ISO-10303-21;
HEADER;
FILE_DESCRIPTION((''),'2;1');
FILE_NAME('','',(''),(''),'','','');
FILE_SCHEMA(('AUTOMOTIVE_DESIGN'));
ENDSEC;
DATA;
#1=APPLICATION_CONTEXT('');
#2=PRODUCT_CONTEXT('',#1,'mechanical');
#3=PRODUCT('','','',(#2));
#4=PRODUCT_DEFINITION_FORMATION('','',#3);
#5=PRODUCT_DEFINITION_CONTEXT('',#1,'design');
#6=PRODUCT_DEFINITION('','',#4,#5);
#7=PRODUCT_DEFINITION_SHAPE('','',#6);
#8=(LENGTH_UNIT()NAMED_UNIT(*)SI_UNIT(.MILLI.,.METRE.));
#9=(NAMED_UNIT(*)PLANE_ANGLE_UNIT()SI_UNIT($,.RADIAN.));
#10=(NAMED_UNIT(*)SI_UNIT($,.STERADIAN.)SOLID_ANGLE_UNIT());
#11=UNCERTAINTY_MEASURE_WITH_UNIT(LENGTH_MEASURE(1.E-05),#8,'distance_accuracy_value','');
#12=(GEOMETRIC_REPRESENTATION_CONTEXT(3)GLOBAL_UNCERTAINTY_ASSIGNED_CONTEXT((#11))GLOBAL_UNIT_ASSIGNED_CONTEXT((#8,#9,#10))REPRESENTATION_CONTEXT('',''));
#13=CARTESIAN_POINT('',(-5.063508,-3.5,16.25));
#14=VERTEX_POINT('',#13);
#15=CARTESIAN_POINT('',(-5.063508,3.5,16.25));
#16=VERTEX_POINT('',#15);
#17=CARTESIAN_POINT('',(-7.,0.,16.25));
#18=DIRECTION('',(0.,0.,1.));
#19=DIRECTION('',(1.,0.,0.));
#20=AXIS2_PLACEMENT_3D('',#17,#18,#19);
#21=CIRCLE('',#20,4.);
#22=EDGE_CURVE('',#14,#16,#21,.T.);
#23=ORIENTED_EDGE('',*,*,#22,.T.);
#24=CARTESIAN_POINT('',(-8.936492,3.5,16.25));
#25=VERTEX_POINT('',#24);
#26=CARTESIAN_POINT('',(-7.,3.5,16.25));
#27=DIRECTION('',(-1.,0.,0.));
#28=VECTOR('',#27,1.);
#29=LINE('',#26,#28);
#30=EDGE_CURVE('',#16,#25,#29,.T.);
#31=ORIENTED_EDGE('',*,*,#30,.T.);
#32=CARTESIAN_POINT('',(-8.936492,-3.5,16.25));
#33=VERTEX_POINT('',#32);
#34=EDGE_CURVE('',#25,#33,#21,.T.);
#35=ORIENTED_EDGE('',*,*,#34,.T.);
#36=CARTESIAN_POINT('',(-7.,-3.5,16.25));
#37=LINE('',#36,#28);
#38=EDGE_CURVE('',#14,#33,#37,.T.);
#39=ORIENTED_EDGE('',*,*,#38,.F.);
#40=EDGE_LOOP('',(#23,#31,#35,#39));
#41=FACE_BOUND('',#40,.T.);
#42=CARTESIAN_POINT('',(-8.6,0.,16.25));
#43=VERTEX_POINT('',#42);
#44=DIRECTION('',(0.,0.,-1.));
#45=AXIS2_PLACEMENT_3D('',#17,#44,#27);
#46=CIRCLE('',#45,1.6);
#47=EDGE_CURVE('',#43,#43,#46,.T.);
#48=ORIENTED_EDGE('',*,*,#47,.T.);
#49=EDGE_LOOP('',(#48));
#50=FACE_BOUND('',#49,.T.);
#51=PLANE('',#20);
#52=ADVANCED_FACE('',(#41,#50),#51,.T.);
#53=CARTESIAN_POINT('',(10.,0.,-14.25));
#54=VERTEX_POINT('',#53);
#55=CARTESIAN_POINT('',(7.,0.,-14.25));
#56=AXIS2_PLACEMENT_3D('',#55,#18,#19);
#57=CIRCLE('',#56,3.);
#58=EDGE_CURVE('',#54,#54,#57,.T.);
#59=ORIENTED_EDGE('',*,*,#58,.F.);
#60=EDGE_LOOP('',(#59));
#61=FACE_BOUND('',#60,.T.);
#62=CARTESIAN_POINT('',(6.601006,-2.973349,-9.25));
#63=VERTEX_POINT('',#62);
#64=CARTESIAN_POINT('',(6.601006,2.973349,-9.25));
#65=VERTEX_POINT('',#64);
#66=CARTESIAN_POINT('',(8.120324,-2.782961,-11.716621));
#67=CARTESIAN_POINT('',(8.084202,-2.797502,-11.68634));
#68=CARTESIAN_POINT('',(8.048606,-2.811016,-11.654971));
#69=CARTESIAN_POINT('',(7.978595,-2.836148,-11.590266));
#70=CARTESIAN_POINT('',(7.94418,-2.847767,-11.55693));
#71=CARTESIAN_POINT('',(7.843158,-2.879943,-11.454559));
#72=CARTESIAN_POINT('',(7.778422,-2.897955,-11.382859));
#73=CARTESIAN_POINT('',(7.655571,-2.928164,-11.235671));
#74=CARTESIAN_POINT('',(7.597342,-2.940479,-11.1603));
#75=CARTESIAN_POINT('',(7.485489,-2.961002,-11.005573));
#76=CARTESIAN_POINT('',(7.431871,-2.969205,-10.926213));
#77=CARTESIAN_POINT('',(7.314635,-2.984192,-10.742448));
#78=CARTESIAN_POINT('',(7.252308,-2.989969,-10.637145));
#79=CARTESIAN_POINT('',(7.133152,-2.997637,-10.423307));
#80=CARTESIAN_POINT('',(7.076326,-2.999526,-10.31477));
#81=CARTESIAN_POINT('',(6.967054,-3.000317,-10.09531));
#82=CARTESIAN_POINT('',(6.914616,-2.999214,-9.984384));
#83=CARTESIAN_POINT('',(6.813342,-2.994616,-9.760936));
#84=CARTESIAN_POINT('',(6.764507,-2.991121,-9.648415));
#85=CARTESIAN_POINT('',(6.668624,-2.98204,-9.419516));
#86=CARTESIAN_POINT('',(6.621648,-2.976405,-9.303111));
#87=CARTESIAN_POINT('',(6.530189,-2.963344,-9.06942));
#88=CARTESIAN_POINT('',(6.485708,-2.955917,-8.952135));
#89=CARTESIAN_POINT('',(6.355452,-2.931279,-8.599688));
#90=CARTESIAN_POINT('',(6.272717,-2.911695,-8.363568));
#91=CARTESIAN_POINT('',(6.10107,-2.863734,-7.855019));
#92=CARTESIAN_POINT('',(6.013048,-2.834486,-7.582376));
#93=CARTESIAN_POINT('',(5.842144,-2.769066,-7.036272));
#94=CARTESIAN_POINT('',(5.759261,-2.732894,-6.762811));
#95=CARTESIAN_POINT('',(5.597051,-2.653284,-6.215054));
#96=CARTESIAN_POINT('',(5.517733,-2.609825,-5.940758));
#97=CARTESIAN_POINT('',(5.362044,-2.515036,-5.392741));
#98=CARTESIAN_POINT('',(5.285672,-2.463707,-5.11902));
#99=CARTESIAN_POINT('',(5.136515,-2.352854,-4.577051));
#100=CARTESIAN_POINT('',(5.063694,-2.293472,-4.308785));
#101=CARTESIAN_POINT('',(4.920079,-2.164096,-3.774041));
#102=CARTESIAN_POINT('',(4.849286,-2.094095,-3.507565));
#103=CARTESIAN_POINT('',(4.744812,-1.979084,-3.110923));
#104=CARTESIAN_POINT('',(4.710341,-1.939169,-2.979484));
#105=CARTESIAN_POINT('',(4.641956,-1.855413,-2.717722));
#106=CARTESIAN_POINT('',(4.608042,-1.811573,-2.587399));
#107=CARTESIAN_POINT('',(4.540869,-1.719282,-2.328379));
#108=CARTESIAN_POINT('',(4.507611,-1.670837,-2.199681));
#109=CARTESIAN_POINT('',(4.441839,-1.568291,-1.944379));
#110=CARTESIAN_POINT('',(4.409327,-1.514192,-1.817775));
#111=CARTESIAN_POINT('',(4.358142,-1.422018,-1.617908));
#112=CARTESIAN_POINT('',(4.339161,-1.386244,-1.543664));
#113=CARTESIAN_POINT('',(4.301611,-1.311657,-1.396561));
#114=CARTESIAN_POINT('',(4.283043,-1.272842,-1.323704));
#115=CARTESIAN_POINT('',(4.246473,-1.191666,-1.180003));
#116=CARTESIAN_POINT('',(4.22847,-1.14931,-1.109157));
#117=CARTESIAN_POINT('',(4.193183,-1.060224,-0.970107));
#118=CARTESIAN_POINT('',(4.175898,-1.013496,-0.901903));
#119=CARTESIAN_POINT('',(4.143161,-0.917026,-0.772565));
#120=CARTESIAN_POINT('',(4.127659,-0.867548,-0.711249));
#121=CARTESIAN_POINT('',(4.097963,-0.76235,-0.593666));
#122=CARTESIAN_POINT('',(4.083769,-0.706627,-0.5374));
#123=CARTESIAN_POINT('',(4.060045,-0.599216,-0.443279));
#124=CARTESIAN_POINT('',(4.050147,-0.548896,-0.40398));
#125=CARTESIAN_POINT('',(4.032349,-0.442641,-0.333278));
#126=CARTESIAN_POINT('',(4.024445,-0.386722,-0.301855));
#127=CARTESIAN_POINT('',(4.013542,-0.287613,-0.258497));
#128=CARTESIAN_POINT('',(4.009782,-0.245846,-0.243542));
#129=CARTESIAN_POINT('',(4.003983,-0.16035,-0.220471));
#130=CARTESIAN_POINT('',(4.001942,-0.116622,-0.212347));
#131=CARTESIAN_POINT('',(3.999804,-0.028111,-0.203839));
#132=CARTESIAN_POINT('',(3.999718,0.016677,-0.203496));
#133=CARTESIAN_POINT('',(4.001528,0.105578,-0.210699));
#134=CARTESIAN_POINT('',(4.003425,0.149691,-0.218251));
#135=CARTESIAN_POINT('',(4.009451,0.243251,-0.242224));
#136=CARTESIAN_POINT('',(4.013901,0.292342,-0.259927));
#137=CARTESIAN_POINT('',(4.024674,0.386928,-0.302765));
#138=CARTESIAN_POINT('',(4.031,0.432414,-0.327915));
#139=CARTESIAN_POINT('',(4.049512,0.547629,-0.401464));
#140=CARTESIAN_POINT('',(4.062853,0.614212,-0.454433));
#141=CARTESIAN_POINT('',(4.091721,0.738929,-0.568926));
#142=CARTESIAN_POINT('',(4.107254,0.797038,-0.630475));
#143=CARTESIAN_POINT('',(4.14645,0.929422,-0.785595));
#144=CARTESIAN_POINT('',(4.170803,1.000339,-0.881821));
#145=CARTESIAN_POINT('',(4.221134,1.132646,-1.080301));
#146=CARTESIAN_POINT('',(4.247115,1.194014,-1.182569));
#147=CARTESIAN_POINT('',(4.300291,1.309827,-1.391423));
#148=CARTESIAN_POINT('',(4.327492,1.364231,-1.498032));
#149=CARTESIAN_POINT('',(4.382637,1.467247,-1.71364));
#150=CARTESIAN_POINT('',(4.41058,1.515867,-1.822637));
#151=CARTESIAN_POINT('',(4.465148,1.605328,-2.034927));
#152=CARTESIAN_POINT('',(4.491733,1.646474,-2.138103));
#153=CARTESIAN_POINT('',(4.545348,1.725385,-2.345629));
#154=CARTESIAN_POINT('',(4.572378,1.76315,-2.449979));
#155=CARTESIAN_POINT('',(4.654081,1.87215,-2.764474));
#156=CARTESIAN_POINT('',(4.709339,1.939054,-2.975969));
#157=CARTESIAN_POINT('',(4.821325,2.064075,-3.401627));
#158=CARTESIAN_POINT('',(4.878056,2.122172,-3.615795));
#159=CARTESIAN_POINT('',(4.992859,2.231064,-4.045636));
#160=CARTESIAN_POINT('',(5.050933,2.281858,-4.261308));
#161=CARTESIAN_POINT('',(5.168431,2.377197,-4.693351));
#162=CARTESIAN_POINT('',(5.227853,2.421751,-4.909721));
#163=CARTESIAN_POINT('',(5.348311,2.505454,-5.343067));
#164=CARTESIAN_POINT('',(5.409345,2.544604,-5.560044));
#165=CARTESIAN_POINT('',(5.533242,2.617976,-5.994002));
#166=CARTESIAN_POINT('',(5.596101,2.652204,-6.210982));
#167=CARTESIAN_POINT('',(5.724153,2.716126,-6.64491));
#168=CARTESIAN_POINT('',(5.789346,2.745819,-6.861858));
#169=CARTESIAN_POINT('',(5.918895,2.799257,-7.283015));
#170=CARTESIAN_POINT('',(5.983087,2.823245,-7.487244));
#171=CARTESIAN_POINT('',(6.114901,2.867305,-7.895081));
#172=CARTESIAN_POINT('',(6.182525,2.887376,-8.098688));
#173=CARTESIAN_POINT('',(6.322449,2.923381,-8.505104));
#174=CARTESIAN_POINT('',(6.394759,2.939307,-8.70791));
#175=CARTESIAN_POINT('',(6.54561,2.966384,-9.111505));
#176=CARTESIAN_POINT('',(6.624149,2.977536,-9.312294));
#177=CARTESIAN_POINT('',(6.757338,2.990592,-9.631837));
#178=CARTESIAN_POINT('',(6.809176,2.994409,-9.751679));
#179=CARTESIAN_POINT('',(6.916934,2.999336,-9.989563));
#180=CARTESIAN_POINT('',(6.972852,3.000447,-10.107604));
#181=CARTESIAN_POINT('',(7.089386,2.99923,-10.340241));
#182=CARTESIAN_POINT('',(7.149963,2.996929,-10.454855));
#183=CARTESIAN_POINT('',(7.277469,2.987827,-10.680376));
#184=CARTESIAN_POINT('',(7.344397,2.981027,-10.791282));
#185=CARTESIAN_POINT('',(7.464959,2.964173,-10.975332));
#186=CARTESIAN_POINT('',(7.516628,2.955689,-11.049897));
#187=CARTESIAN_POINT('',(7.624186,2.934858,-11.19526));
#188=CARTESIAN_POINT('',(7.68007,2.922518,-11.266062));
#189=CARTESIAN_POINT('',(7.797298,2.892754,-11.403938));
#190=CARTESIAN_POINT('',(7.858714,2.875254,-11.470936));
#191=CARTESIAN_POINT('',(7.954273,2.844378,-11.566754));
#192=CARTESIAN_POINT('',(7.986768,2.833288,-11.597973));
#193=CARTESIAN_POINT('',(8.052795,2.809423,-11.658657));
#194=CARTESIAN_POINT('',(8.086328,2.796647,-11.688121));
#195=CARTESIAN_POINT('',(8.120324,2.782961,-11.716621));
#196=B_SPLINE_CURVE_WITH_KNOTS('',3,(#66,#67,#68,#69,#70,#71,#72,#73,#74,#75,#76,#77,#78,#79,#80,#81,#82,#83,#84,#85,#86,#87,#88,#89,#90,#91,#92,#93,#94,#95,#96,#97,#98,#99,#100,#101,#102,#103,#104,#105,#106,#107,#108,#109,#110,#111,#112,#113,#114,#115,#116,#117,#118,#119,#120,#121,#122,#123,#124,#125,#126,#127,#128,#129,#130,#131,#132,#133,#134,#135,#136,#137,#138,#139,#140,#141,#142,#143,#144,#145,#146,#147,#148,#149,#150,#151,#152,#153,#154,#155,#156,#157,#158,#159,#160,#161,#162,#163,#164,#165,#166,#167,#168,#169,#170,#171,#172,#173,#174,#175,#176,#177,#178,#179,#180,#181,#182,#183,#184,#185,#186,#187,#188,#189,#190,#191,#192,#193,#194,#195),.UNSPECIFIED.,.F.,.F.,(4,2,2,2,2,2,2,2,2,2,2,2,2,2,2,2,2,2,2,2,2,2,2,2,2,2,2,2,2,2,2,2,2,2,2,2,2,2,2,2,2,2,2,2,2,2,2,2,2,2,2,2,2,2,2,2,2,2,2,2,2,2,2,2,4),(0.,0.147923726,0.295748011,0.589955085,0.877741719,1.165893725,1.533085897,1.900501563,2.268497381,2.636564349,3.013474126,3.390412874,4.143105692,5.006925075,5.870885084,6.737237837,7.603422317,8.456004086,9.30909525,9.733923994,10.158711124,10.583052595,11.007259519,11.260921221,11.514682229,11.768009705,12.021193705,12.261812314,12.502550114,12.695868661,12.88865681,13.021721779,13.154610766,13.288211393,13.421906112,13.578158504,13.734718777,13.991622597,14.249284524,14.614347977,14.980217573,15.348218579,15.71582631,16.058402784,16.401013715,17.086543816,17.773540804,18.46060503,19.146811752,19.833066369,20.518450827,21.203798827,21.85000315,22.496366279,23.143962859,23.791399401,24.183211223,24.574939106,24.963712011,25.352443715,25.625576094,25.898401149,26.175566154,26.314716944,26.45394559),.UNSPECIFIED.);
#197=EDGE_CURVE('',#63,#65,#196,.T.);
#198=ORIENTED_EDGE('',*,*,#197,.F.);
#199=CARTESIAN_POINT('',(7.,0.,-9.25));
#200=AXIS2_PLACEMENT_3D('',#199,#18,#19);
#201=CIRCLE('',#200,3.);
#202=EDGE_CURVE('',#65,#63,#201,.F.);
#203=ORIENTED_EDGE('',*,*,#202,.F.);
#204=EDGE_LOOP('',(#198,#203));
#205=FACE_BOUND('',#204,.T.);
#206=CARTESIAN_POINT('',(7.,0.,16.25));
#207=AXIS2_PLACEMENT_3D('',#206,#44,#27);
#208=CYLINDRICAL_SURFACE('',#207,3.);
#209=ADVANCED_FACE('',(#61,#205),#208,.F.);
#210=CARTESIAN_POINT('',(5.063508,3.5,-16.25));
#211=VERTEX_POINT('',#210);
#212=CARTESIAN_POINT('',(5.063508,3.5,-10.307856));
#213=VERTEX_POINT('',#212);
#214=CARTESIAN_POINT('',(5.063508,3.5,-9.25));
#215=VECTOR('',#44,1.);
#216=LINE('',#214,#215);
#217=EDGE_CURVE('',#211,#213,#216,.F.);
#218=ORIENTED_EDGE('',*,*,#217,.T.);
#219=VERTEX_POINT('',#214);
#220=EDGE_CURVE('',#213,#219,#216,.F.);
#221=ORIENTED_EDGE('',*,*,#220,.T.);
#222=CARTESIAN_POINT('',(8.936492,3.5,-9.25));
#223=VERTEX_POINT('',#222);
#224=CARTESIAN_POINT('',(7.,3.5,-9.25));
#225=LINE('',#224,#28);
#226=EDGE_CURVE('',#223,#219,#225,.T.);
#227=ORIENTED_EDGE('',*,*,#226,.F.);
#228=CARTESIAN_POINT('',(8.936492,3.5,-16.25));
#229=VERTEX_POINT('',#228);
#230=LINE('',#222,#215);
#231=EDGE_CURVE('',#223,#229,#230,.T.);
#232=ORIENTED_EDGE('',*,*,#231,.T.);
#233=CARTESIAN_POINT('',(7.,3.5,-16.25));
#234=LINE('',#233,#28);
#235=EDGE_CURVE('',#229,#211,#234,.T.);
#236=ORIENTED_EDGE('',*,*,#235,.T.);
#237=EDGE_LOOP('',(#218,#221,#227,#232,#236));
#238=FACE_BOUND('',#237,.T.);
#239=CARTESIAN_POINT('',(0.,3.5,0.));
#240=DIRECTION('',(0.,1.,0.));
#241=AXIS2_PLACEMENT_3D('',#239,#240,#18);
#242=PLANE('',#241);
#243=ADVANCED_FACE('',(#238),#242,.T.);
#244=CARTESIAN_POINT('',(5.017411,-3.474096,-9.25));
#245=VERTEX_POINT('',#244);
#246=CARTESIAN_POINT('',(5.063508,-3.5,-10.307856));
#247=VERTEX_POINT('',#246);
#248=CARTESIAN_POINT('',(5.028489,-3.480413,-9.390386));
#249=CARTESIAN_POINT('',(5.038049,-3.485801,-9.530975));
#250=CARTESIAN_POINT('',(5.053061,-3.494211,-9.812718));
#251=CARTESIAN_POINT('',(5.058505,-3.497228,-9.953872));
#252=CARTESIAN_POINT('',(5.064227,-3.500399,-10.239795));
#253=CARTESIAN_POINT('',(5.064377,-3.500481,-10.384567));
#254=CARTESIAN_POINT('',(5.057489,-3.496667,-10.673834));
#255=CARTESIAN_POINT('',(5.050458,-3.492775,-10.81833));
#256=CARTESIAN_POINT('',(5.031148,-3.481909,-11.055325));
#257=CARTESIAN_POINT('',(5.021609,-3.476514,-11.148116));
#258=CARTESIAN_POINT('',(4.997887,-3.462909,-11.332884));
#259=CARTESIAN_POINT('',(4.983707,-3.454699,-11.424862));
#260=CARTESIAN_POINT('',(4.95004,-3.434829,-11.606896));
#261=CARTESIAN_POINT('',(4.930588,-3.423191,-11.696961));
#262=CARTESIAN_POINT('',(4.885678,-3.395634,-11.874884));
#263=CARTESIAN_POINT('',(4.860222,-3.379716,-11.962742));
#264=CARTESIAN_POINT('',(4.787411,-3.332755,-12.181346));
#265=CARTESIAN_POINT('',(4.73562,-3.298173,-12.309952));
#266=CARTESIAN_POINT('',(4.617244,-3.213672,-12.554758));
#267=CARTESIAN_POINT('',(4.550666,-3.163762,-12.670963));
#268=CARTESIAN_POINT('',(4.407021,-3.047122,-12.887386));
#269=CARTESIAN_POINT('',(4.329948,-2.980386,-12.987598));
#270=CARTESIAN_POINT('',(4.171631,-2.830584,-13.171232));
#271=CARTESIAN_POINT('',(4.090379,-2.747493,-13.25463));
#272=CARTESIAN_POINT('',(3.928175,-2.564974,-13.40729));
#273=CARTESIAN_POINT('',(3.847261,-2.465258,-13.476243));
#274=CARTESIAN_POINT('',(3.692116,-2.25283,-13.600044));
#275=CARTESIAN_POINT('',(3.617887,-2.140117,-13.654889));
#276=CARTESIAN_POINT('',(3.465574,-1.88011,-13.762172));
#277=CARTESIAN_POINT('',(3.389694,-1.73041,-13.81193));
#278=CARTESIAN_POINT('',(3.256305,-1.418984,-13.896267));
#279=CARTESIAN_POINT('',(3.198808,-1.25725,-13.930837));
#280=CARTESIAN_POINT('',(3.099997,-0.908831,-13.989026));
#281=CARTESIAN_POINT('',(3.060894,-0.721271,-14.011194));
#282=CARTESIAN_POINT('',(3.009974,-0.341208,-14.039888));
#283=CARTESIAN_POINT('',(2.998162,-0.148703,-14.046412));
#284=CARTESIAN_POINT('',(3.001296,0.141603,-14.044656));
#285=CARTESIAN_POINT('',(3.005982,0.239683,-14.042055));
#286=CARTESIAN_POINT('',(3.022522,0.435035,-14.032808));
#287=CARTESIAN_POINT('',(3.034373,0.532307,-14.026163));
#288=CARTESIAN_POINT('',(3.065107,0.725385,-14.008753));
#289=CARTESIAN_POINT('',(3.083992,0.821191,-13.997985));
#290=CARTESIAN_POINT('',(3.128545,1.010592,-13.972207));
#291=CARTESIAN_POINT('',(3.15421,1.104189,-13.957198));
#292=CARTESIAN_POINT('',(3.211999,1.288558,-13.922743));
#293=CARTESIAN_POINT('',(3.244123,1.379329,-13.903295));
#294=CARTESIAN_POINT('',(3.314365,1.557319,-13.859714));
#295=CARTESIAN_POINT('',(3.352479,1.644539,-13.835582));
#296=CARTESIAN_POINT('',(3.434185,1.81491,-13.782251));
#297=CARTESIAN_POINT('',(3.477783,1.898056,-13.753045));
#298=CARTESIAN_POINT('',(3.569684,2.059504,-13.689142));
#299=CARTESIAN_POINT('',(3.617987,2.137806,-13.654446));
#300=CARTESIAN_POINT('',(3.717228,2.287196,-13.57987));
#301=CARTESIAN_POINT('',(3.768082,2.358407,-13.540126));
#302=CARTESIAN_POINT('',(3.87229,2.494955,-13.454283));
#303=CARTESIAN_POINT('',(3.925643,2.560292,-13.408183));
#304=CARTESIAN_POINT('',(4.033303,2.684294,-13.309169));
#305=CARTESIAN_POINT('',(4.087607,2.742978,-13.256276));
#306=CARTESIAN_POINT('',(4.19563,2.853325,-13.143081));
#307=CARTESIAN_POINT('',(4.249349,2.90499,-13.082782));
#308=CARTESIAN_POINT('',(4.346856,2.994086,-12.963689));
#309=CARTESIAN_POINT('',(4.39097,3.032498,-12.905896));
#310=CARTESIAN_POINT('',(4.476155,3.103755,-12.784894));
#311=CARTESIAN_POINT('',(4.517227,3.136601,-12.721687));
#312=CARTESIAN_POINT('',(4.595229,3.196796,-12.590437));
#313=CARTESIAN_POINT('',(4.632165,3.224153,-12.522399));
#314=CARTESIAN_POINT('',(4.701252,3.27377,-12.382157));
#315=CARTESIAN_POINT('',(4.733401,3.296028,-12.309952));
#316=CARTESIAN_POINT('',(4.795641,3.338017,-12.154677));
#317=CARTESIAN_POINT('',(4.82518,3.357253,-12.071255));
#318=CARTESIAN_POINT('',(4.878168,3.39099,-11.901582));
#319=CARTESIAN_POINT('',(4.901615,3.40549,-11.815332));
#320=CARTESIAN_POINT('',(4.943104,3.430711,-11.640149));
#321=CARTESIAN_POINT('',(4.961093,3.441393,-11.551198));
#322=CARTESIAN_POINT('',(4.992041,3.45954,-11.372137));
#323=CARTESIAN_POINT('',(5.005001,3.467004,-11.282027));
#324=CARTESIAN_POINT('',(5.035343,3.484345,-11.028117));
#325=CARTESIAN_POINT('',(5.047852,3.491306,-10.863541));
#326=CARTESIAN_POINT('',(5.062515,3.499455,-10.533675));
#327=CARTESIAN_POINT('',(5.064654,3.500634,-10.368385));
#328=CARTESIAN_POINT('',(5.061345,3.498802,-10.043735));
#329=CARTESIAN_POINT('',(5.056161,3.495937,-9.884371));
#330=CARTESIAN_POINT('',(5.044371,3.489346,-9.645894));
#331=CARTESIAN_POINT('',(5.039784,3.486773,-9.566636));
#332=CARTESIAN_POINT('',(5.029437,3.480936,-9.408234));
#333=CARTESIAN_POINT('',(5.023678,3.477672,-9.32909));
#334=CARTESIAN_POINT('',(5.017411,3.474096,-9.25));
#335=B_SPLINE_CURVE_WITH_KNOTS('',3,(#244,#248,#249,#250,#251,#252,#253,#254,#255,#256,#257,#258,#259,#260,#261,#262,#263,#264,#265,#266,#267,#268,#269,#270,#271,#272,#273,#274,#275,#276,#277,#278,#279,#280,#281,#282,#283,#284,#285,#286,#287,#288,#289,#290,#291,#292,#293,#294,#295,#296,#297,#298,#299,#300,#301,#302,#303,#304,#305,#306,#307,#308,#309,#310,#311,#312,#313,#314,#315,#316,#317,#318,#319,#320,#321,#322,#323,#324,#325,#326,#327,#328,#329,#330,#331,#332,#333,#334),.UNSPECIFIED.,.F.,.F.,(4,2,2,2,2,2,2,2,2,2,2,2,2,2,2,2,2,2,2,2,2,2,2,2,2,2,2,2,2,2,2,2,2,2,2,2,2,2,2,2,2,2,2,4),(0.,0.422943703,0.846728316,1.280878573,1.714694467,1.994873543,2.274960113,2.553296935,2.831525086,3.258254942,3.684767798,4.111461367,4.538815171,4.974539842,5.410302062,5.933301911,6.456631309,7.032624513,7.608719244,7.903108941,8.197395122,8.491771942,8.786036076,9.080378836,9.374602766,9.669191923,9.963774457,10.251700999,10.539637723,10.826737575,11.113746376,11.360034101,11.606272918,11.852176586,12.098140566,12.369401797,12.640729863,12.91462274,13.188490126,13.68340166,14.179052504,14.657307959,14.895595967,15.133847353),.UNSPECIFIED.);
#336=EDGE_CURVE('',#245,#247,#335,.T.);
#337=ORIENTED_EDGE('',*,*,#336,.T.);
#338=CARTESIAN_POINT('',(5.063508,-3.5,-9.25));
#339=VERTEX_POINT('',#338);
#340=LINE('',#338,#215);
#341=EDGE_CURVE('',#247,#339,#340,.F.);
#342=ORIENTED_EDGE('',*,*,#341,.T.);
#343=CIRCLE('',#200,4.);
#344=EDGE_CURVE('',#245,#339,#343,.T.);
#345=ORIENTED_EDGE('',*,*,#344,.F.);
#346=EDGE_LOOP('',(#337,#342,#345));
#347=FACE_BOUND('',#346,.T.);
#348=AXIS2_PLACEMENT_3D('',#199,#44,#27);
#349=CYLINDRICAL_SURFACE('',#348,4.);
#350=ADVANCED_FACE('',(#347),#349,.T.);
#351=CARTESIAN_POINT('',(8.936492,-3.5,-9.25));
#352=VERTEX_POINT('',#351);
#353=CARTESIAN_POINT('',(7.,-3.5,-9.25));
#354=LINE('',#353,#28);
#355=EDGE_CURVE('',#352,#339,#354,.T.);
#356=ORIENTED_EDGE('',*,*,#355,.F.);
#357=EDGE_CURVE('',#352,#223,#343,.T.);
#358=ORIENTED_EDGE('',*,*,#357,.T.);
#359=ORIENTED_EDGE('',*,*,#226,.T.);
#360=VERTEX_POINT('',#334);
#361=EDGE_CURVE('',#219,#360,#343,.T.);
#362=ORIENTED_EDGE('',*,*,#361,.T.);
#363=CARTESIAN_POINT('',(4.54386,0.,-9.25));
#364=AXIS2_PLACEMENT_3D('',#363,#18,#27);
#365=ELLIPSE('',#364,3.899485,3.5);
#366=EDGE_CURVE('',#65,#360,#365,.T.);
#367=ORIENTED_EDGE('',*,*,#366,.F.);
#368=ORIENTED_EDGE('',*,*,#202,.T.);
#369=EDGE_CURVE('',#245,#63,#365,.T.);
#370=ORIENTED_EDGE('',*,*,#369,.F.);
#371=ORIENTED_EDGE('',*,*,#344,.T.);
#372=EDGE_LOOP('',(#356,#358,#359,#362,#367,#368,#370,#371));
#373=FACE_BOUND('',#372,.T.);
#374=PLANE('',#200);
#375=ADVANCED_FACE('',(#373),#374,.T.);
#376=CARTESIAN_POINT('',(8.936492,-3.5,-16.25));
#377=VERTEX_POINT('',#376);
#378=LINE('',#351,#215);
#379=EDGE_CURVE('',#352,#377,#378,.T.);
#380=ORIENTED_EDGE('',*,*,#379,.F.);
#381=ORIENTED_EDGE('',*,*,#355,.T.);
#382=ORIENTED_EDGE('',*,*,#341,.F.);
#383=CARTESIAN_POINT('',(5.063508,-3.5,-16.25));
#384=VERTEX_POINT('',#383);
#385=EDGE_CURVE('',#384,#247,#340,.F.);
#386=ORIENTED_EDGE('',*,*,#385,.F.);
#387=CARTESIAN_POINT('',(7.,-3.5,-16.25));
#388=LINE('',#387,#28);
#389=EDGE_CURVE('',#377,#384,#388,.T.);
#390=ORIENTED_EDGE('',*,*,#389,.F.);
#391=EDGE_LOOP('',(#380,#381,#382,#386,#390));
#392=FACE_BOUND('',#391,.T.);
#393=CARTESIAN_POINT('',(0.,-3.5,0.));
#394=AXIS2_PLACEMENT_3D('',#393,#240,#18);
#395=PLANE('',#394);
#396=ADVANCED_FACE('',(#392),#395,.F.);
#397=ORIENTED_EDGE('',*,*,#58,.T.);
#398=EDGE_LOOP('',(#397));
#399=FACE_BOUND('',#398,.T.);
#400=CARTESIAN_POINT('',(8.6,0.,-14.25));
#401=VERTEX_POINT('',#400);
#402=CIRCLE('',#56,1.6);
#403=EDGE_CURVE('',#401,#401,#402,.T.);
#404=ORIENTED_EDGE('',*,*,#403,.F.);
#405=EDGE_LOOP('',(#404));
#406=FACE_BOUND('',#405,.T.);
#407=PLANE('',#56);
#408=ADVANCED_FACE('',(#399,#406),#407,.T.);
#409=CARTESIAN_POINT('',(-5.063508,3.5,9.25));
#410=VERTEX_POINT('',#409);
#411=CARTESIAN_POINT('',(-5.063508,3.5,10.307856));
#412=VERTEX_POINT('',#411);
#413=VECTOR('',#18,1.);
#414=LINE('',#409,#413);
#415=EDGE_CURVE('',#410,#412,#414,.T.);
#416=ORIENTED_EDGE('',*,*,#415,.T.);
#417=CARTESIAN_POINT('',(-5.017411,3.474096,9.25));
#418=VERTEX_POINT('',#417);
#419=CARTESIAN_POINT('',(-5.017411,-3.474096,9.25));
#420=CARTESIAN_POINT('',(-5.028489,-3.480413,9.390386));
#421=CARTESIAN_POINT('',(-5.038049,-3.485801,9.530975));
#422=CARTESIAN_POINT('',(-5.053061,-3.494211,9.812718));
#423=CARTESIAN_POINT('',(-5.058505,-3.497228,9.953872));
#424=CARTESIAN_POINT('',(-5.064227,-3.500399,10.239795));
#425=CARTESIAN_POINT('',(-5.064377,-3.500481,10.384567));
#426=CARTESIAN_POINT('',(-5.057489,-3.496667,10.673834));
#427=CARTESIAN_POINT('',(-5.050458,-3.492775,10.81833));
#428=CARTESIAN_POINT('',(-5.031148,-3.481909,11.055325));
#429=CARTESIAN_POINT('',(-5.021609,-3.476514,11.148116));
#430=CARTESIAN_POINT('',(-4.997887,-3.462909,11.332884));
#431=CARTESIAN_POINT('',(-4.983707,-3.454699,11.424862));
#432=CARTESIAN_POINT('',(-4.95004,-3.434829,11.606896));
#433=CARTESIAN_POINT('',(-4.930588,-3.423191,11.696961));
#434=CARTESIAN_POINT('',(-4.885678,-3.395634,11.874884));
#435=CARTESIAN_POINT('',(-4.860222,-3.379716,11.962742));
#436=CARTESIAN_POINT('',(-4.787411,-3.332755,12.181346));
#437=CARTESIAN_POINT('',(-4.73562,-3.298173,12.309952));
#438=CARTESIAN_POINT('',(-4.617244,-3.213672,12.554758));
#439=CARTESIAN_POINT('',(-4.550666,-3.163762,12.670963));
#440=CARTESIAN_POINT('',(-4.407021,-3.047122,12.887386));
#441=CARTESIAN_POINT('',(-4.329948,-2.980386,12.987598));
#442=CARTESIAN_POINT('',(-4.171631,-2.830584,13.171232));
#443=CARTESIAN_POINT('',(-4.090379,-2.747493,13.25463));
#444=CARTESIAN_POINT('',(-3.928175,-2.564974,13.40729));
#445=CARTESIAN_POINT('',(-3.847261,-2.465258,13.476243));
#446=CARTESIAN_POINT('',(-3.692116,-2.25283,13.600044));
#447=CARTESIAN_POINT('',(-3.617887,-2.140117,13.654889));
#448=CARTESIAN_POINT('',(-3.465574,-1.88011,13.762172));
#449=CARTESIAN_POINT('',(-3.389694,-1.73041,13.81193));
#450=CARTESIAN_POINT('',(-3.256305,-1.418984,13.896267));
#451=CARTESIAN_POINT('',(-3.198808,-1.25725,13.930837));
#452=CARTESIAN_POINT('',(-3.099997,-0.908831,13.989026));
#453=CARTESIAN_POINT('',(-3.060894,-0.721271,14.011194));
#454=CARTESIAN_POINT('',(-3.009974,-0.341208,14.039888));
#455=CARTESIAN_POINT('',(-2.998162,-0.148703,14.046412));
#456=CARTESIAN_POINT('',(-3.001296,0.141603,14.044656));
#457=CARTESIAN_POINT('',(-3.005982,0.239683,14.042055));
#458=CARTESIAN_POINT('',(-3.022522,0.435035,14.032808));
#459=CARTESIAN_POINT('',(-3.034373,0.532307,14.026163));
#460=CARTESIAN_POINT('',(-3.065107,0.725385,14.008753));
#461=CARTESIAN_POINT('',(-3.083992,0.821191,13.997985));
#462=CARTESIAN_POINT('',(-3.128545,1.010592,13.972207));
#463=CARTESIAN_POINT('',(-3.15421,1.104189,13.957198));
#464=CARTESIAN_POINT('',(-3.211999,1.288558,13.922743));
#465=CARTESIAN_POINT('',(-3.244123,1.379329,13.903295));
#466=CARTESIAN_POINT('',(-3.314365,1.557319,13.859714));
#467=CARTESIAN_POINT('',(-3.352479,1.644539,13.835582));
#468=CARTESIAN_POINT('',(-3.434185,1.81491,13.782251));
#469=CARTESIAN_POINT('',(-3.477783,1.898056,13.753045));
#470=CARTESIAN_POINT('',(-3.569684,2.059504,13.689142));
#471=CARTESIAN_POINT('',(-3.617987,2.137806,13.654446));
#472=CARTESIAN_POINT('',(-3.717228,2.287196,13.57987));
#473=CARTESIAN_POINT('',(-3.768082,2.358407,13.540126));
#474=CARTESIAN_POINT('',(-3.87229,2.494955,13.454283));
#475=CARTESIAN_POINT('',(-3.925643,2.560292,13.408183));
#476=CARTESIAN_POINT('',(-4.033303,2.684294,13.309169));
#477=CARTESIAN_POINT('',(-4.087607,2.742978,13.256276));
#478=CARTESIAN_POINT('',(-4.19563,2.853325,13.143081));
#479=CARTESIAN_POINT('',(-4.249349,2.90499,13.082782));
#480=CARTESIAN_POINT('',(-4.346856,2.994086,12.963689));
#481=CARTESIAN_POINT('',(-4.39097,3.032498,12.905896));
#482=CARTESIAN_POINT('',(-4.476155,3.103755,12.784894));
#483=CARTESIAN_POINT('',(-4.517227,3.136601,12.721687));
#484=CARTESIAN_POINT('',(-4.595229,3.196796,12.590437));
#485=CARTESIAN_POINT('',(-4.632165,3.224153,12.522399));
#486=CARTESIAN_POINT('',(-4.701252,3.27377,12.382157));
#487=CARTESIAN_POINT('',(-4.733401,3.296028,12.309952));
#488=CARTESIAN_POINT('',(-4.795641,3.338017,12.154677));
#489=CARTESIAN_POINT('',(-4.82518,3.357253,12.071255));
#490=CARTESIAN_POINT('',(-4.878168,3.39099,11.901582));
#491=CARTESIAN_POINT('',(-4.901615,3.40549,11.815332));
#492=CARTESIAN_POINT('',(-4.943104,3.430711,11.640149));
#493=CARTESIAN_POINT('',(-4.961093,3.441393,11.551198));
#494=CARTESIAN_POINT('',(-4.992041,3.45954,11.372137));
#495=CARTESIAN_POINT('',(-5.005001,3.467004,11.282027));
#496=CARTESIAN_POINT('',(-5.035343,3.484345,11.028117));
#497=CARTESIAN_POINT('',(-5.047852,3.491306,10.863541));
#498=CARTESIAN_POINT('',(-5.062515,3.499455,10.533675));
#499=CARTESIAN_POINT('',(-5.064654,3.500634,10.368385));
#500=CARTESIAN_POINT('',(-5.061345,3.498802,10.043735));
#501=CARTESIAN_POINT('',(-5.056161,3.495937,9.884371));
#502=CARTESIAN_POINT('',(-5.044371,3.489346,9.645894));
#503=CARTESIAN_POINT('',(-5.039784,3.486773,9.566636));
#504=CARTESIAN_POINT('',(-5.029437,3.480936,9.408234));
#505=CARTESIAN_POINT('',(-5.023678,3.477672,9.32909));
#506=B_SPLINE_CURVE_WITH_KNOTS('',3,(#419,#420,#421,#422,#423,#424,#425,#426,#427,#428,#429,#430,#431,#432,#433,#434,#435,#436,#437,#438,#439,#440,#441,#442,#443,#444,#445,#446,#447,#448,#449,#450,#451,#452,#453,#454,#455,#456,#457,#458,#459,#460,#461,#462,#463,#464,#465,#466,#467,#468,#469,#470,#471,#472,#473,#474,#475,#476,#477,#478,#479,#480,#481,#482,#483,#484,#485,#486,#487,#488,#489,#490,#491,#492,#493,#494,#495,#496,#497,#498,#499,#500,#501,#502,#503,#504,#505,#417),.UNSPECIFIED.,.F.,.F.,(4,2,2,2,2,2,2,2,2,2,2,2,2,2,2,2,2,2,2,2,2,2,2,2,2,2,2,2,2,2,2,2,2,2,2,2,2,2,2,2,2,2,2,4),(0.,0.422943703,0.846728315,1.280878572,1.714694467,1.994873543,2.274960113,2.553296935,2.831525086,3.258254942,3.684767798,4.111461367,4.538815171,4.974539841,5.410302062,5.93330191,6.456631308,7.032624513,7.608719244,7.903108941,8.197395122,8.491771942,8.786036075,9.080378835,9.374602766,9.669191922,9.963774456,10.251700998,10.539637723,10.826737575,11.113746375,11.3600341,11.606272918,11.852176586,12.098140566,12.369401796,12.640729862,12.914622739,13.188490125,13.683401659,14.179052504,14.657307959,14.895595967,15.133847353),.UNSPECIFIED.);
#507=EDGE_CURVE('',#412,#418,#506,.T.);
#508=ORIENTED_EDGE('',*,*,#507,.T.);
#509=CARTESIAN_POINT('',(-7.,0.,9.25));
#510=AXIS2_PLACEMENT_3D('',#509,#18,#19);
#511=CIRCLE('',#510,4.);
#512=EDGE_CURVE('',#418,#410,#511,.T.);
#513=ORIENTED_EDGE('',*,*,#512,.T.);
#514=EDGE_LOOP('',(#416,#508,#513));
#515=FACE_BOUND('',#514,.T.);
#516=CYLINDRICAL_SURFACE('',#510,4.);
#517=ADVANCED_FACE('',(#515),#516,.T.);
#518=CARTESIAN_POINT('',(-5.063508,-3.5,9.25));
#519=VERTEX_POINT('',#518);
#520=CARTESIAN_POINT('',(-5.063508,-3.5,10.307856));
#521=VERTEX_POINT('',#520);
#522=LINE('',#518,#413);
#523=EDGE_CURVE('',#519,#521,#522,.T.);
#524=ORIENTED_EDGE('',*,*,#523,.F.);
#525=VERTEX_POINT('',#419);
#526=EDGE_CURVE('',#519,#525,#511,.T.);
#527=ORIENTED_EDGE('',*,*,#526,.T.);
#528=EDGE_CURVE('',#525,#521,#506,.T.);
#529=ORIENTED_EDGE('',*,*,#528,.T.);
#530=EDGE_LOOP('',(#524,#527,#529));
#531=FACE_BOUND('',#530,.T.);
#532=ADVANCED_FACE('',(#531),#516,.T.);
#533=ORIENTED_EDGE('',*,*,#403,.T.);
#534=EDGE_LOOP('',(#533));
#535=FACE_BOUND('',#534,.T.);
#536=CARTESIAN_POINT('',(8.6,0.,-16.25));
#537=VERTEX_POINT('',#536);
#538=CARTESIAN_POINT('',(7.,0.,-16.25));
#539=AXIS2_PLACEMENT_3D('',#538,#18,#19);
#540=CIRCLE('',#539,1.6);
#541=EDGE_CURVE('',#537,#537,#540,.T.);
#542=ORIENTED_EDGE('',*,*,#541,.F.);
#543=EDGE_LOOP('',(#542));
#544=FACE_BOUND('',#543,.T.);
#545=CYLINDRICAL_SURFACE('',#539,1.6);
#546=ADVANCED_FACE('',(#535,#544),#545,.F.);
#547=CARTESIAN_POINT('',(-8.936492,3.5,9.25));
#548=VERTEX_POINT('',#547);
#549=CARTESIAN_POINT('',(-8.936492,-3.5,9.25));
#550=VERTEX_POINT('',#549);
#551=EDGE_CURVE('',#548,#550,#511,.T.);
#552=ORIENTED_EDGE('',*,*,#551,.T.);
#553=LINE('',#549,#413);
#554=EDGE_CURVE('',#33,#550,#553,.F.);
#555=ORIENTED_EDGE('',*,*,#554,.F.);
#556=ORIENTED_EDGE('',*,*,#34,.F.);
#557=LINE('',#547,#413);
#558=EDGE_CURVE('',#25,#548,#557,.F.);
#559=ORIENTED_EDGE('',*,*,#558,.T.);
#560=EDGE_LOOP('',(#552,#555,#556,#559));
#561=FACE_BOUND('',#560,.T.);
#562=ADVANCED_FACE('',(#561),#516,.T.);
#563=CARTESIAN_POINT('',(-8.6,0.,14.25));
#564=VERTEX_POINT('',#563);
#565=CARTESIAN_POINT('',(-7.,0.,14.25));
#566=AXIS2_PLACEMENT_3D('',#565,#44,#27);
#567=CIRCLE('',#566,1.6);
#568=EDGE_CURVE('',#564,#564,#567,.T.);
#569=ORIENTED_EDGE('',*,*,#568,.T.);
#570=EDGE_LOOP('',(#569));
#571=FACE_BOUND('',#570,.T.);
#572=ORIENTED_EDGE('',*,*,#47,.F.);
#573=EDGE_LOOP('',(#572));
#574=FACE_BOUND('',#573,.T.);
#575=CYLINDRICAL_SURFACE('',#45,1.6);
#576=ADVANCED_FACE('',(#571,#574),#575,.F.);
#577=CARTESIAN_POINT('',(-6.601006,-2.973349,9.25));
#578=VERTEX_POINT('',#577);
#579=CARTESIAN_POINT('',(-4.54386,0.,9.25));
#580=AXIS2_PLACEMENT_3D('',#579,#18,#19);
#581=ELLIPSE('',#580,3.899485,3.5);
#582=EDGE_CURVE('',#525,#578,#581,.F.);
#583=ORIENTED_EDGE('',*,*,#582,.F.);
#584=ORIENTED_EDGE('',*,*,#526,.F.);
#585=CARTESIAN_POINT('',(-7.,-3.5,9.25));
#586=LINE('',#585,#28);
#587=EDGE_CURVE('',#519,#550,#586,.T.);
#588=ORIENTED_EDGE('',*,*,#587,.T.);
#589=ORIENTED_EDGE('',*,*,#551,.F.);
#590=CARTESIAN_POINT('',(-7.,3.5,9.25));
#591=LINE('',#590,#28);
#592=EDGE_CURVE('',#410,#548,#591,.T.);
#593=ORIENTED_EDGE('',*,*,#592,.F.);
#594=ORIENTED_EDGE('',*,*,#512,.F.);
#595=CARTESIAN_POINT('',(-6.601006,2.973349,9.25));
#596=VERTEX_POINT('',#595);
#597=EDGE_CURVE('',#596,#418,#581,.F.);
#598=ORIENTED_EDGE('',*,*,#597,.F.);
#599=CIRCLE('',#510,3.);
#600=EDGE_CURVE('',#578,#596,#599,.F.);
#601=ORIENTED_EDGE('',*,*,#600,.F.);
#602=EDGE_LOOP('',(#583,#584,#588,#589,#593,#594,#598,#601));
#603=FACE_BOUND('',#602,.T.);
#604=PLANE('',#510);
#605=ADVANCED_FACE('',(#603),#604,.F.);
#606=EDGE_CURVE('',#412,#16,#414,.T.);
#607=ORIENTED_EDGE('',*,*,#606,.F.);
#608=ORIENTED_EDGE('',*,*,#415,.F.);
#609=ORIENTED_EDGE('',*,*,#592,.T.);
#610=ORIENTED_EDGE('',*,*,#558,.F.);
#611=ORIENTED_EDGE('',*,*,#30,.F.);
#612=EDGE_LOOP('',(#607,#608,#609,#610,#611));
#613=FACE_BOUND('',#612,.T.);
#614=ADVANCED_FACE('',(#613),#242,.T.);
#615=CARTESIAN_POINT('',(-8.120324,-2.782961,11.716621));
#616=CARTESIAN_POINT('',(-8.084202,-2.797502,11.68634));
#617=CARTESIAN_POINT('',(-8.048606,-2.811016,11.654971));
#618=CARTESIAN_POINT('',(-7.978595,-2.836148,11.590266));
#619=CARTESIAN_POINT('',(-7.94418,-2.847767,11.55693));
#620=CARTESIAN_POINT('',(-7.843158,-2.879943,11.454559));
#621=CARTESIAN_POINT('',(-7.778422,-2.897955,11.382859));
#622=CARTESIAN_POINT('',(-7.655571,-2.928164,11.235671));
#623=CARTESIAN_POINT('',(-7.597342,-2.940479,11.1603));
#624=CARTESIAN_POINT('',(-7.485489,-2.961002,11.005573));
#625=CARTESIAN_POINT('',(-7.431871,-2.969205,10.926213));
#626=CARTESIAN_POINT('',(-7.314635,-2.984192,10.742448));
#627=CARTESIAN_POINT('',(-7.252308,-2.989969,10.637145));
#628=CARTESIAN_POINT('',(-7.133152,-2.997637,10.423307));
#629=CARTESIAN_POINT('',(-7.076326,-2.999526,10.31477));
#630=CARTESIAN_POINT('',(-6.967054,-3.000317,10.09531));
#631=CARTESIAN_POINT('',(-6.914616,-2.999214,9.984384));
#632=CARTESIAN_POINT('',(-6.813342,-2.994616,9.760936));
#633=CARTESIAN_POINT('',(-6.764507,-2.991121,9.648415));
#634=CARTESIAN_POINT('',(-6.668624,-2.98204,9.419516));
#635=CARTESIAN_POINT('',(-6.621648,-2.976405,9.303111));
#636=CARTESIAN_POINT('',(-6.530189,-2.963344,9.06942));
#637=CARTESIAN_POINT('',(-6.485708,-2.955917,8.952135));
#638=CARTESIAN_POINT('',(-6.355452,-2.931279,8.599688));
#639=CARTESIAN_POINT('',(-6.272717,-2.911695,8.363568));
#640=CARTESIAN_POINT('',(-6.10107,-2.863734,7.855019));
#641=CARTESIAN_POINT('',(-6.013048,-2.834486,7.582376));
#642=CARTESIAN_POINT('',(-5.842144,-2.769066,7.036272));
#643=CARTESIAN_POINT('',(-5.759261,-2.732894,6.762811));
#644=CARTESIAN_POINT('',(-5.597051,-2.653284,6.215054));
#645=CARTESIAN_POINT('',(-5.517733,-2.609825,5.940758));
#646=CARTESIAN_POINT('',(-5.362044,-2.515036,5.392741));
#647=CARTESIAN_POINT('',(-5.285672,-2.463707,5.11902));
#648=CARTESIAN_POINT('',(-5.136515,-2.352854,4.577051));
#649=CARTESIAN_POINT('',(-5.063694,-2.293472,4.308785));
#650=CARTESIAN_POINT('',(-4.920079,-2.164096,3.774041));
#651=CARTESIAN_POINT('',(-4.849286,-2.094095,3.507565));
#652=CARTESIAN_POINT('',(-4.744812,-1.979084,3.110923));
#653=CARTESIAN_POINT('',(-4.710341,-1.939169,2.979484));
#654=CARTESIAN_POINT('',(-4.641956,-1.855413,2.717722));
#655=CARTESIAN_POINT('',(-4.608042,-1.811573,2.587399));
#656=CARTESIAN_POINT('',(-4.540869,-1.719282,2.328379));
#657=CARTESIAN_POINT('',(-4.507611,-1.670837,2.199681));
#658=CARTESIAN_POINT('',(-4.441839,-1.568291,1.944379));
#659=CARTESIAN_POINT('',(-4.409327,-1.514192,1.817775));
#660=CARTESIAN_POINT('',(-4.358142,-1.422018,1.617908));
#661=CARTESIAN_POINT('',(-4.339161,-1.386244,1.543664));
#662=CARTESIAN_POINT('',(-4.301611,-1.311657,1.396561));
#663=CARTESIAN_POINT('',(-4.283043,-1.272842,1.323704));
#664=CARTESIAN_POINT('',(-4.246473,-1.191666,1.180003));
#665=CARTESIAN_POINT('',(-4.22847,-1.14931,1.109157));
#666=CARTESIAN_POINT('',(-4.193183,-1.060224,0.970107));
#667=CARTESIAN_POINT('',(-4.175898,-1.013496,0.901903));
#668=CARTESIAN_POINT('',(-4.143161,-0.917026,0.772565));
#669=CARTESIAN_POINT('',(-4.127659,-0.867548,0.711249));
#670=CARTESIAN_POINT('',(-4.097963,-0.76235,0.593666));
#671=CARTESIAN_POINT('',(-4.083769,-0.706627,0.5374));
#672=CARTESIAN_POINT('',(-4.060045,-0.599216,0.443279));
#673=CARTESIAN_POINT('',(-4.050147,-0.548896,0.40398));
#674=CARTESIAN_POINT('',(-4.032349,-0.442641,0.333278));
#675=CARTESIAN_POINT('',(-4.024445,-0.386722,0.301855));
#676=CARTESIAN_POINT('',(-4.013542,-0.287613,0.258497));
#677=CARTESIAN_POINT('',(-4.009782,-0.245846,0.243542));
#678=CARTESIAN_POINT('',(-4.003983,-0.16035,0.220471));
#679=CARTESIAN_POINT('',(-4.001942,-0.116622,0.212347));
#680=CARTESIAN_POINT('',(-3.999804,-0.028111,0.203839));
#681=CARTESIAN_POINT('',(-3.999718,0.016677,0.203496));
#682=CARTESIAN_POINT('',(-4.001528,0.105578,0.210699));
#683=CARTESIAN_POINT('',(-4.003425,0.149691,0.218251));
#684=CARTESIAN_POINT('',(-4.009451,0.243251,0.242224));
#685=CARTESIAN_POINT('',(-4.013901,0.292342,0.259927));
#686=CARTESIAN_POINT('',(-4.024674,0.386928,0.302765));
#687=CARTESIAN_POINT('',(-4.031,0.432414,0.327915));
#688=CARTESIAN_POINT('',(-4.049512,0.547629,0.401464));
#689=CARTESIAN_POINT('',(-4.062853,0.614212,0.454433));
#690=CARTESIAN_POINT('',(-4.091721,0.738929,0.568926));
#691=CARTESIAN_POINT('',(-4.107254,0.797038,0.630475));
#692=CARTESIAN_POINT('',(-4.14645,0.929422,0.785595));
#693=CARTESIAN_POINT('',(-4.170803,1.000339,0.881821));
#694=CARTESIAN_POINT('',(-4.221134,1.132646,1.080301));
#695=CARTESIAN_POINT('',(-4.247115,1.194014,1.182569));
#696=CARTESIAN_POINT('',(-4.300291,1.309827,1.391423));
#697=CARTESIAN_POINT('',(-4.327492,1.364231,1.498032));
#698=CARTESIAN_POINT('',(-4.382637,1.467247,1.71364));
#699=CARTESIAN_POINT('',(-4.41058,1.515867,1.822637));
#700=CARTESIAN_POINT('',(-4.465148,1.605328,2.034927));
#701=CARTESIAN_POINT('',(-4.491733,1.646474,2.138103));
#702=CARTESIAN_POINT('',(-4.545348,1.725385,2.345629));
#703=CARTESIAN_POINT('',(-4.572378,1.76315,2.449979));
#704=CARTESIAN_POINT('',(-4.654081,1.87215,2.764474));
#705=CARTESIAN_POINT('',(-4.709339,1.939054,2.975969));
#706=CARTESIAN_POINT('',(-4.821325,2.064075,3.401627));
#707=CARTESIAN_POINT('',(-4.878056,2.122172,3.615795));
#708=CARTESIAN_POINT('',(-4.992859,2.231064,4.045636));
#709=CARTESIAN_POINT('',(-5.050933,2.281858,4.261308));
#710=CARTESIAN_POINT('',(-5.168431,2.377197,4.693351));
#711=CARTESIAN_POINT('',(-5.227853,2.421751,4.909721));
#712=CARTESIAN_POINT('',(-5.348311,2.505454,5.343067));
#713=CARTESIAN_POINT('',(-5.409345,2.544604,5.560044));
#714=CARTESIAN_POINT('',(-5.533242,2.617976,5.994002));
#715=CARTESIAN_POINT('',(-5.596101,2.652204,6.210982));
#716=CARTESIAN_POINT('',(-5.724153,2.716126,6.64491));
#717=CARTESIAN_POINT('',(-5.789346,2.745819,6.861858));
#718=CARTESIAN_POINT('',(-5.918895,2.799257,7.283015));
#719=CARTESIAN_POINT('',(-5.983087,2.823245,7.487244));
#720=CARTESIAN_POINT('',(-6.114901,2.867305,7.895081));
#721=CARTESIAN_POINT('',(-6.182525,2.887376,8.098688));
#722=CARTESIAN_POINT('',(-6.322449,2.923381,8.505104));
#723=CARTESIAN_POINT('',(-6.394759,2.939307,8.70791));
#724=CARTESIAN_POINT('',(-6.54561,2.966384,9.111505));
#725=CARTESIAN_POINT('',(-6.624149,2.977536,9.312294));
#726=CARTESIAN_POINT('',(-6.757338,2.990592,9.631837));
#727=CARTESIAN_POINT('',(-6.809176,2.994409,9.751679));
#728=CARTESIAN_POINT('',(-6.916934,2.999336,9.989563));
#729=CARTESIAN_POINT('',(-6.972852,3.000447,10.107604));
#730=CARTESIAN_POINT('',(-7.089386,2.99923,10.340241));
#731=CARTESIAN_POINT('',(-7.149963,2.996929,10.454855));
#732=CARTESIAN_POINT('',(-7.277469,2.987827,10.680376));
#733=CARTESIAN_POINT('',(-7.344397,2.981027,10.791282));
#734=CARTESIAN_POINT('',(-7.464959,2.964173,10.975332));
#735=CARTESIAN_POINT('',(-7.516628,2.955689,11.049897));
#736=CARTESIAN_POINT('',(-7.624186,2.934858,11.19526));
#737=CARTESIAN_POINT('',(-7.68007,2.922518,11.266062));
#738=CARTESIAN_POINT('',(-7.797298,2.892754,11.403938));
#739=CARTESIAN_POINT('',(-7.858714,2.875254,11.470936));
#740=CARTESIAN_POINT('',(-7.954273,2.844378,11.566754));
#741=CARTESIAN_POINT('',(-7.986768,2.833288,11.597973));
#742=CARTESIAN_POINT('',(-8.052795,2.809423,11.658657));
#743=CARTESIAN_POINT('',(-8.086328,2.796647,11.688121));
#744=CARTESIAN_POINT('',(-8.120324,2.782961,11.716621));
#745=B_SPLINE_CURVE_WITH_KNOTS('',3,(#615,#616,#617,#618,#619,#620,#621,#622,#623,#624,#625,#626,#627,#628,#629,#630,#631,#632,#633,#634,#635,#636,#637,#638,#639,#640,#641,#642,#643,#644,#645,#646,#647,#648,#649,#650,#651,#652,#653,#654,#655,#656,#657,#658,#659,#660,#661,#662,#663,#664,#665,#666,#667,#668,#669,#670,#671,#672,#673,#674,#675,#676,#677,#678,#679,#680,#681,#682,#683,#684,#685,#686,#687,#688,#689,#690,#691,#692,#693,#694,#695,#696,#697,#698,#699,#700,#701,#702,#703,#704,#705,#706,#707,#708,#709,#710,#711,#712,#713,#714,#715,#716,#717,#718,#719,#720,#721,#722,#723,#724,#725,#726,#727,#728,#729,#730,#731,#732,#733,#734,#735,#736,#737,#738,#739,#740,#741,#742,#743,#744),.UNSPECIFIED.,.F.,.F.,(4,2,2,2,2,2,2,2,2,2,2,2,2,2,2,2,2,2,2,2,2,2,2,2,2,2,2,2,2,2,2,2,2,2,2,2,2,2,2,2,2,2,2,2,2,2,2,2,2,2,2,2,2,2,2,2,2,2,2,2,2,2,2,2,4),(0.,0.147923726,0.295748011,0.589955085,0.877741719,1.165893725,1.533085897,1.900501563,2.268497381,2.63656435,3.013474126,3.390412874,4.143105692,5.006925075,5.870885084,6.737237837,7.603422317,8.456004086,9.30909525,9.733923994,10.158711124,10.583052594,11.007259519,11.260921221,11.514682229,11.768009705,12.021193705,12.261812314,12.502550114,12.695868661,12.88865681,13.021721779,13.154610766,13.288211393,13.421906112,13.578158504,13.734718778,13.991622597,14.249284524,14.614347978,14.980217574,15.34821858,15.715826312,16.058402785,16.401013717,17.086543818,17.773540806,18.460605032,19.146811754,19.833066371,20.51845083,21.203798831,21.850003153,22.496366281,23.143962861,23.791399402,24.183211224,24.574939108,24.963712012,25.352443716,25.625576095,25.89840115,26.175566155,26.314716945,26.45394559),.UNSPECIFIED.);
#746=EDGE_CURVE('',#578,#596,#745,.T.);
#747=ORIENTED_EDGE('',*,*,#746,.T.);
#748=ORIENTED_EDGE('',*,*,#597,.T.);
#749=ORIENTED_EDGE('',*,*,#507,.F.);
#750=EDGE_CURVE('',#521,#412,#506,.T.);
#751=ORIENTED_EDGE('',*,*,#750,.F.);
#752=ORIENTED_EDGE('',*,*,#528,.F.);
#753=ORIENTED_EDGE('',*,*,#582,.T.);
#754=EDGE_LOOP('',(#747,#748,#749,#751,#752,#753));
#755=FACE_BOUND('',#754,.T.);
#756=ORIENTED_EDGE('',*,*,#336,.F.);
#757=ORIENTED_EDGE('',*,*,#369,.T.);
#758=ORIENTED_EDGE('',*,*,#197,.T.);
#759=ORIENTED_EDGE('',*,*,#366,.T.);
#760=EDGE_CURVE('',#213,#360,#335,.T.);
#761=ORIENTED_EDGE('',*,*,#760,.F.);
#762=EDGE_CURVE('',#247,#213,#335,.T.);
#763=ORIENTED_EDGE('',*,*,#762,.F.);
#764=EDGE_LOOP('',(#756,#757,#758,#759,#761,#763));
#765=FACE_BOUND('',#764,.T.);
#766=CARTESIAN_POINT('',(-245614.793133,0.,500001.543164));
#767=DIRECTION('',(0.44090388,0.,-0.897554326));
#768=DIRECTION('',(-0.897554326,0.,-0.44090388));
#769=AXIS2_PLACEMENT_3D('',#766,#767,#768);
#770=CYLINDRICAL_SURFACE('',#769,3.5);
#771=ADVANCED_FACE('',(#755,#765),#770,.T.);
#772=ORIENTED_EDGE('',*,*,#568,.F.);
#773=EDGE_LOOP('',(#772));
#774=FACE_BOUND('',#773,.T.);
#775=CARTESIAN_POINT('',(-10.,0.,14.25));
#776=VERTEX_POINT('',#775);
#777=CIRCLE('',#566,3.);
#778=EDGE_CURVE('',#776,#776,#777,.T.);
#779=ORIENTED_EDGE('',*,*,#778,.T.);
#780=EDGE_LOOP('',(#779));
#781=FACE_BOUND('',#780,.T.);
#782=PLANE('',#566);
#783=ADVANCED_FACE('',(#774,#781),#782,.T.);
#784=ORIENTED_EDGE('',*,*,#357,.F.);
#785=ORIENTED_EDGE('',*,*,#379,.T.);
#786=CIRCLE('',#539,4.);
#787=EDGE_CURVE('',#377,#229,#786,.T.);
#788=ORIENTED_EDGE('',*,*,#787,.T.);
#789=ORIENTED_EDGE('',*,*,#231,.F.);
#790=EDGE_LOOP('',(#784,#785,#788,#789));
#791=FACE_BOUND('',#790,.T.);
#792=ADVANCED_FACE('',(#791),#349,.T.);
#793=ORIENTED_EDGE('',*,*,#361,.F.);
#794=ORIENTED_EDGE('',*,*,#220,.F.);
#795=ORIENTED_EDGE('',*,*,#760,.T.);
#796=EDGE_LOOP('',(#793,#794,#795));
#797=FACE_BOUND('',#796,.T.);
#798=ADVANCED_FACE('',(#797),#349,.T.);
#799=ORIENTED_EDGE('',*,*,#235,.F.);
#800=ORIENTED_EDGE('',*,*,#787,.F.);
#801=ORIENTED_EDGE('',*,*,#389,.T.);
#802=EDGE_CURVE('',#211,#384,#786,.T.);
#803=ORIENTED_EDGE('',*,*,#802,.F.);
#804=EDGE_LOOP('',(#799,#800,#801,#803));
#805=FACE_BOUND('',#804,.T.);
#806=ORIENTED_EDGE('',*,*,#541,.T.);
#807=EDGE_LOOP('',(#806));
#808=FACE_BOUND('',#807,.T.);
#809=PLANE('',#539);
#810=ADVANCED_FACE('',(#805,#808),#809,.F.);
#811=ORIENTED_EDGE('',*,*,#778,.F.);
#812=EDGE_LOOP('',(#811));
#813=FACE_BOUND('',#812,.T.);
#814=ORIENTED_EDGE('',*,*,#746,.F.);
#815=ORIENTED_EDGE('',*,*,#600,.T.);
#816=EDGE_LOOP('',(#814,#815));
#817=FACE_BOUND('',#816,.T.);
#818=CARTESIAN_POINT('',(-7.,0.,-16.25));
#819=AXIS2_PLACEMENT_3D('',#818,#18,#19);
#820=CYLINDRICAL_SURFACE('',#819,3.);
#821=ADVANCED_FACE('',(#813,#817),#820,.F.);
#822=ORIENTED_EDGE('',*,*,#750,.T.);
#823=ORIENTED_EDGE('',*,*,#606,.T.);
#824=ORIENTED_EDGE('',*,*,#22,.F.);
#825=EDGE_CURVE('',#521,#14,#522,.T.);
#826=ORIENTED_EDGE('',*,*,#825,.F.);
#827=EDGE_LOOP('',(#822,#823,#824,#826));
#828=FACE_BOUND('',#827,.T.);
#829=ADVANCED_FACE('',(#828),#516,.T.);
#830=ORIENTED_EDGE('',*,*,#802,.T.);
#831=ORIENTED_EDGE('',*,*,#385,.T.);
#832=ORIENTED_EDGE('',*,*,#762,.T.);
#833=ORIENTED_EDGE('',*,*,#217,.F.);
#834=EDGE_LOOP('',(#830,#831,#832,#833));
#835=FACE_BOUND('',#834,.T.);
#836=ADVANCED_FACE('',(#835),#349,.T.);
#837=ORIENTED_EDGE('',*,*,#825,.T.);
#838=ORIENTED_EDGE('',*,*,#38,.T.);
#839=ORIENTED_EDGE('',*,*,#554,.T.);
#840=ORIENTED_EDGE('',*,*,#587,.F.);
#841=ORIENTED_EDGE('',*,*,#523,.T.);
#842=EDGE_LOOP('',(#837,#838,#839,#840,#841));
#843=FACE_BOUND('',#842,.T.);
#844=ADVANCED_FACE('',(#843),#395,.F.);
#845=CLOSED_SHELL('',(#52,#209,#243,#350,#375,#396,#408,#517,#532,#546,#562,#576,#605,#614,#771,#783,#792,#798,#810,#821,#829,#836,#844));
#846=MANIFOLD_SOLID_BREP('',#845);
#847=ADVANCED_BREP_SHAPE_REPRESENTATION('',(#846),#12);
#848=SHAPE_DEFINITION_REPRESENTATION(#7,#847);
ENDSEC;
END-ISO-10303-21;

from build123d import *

# Parameters (mm, degrees)
BOSS_EXTRUDE1_DEPTH      = 2
BOSS_EXTRUDE1_DEPTH_BACK = 5
SKETCH3_R                = 4
BOSS_EXTRUDE2_DEPTH      = 5
BOSS_EXTRUDE2_DEPTH_BACK = 2
SKETCH2_R                = 4
BOSS_EXTRUDE3_START      = -13.929206
SKETCH4_R                = 3.5
BOSS_EXTRUDE3_DEPTH      = 27.858412
CUT_EXTRUDE1_DEPTH       = 29.057975838
CUT_EXTRUDE1_DEPTH_BACK  = 5
SKETCH5_R                = 3
CUT_EXTRUDE2_DEPTH       = 29.057975747
CUT_EXTRUDE2_DEPTH_BACK  = 5
SKETCH6_R                = 3
SKETCH7_R                = 1.6
CUT_EXTRUDE3_DEPTH       = 33.668792587
SKETCH8_R                = 1.6
CUT_EXTRUDE4_DEPTH       = 33.668792494
SPLIT1_START             = -4.0000001
SPLIT1_OUTLINE_W         = 20
SPLIT1_OUTLINE_H         = 8.75
SPLIT1_DEPTH             = 0.5000001
SPLIT1_START_2           = 3.5
SPLIT1_2_OUTLINE_W       = 20
SPLIT1_2_OUTLINE_H       = 8.75
SPLIT1_2_DEPTH           = 0.5
SPLIT1_START_3           = -16.25
SPLIT1_3_DEPTH           = 7
SPLIT1_START_4           = 9.25
SPLIT1_4_DEPTH           = 7
SPLIT1_5_DEPTH           = 7
SPLIT1_6_DEPTH           = 7


# Read off the part's stored shape, not the designer's step: Split1
with BuildPart() as part:
    # Sketch3 → Boss-Extrude1 (new, two sides: drawn at the far end of the back side and taken through both)
    with BuildSketch(Plane(origin=(-7, 0, 14.25), x_dir=(1, 0, 0), z_dir=(0, 0, 1)).offset(-BOSS_EXTRUDE1_DEPTH_BACK)):
        Circle(SKETCH3_R)
    extrude(amount=BOSS_EXTRUDE1_DEPTH + BOSS_EXTRUDE1_DEPTH_BACK)



with BuildPart() as body_2:
    # Sketch2 → Boss-Extrude2 (new, two sides: drawn at the far end of the back side and taken through both)
    with BuildSketch(Plane(origin=(7, 0, -14.25), x_dir=(1, 0, 0), z_dir=(0, 0, 1)).offset(-BOSS_EXTRUDE2_DEPTH_BACK)):
        Circle(SKETCH2_R)
    extrude(amount=BOSS_EXTRUDE2_DEPTH + BOSS_EXTRUDE2_DEPTH_BACK)


with BuildPart() as part_1:
    add(part.part)

    add(body_2.part)  # Boss-Extrude3 merges body 2
    # Sketch4 → Boss-Extrude3 (add)
    with BuildSketch(Plane(origin=(0, 0, 0), x_dir=(-0.8975543264374148, 0, -0.44090387965346695), z_dir=(0.44090387965346695, 0, -0.8975543264374148)).offset(BOSS_EXTRUDE3_START)):
        with Locations(Location((0, 0, 0), (0, 0, 276.975190017))):
            Circle(SKETCH4_R)
    extrude(amount=BOSS_EXTRUDE3_DEPTH)

    # Sketch5 → Cut-Extrude1 (cut, two sides: drawn at the far end of the back side and taken through both)
    with BuildSketch(Plane.XY.offset(-9.25).offset(-CUT_EXTRUDE1_DEPTH_BACK)):
        with Locations(Location((7, 0, 0), (0, 0, 97.643118007))):
            Circle(SKETCH5_R)
    extrude(amount=CUT_EXTRUDE1_DEPTH + CUT_EXTRUDE1_DEPTH_BACK, mode=Mode.SUBTRACT)

    # Sketch6 → Cut-Extrude2 (cut, two sides: drawn at the far end of the back side and taken through both)
    with BuildSketch(Plane(origin=(0, 0, 9.25), x_dir=(-1, 0, 0), z_dir=(0, 0, -1)).offset(-CUT_EXTRUDE2_DEPTH_BACK)):
        with Locations(Location((7, 0, 0), (0, 0, 97.643118007))):
            Circle(SKETCH6_R)
    extrude(amount=CUT_EXTRUDE2_DEPTH + CUT_EXTRUDE2_DEPTH_BACK, mode=Mode.SUBTRACT)

    # Sketch7 → Cut-Extrude3 (cut, through all)
    with BuildSketch(Plane.XY.offset(-14.25)):
        with Locations((7, 0)):
            Circle(SKETCH7_R)
    extrude(amount=-CUT_EXTRUDE3_DEPTH, mode=Mode.SUBTRACT)

    # Sketch8 → Cut-Extrude4 (cut, through all)
    with BuildSketch(Plane(origin=(0, 0, 14.25), x_dir=(-1, 0, 0), z_dir=(0, 0, -1))):
        with Locations((7, 0)):
            Circle(SKETCH8_R)
    extrude(amount=-CUT_EXTRUDE4_DEPTH, mode=Mode.SUBTRACT)

    # Split1 outline → Split1 (cut)
    with BuildSketch(Plane(origin=(0, 0, 0), x_dir=(1, 0, 0), z_dir=(0, 1, 0)).offset(SPLIT1_START)):
        with Locations((0, -13.625)):
            Rectangle(SPLIT1_OUTLINE_W, SPLIT1_OUTLINE_H)
        with Locations((0, 13.625)):
            Rectangle(SPLIT1_OUTLINE_W, SPLIT1_OUTLINE_H)
    extrude(amount=SPLIT1_DEPTH, mode=Mode.SUBTRACT)

    # Split1 2 outline → Split1 2 (cut)
    with BuildSketch(Plane(origin=(0, 0, 0), x_dir=(1, 0, 0), z_dir=(0, 1, 0)).offset(SPLIT1_START_2)):
        with Locations((0, -13.625)):
            Rectangle(SPLIT1_2_OUTLINE_W, SPLIT1_2_OUTLINE_H)
        with Locations((0, 13.625)):
            Rectangle(SPLIT1_2_OUTLINE_W, SPLIT1_2_OUTLINE_H)
    extrude(amount=SPLIT1_2_DEPTH, mode=Mode.SUBTRACT)


with BuildPart() as body_2_2:
    # Split1 3 outline → Split1 3 (new body)
    with BuildSketch(Plane.XY.offset(SPLIT1_START_3)):
        with BuildLine():
            ThreePointArc((5.063508327, -3.5), (7, -4), (8.936491673, -3.5))
            Line((8.936491673, -3.5), (5.063508327, -3.5))
        make_face()
    extrude(amount=SPLIT1_3_DEPTH)


with BuildPart() as body_3:
    # Split1 4 outline → Split1 4 (new body)
    with BuildSketch(Plane.XY.offset(SPLIT1_START_4)):
        with BuildLine():
            ThreePointArc((-8.936491673, -3.5), (-7, -4), (-5.063508327, -3.5))
            Line((-5.063508327, -3.5), (-8.936491673, -3.5))
        make_face()
    extrude(amount=SPLIT1_4_DEPTH)


with BuildPart() as body_4:
    # Split1 5 outline → Split1 5 (new body)
    with BuildSketch(Plane.XY.offset(SPLIT1_START_4)):
        with BuildLine():
            Line((-8.936491673, 3.5), (-5.063508327, 3.5))
            ThreePointArc((-5.063508327, 3.5), (-7, 4), (-8.936491673, 3.5))
        make_face()
    extrude(amount=SPLIT1_5_DEPTH)


with BuildPart() as body_5:
    # Split1 6 outline → Split1 6 (new body)
    with BuildSketch(Plane.XY.offset(SPLIT1_START_3)):
        with BuildLine():
            Line((5.063508327, 3.5), (8.936491673, 3.5))
            ThreePointArc((8.936491673, 3.5), (7, 4), (5.063508327, 3.5))
        make_face()
    extrude(amount=SPLIT1_6_DEPTH)


solid = part_1.part
